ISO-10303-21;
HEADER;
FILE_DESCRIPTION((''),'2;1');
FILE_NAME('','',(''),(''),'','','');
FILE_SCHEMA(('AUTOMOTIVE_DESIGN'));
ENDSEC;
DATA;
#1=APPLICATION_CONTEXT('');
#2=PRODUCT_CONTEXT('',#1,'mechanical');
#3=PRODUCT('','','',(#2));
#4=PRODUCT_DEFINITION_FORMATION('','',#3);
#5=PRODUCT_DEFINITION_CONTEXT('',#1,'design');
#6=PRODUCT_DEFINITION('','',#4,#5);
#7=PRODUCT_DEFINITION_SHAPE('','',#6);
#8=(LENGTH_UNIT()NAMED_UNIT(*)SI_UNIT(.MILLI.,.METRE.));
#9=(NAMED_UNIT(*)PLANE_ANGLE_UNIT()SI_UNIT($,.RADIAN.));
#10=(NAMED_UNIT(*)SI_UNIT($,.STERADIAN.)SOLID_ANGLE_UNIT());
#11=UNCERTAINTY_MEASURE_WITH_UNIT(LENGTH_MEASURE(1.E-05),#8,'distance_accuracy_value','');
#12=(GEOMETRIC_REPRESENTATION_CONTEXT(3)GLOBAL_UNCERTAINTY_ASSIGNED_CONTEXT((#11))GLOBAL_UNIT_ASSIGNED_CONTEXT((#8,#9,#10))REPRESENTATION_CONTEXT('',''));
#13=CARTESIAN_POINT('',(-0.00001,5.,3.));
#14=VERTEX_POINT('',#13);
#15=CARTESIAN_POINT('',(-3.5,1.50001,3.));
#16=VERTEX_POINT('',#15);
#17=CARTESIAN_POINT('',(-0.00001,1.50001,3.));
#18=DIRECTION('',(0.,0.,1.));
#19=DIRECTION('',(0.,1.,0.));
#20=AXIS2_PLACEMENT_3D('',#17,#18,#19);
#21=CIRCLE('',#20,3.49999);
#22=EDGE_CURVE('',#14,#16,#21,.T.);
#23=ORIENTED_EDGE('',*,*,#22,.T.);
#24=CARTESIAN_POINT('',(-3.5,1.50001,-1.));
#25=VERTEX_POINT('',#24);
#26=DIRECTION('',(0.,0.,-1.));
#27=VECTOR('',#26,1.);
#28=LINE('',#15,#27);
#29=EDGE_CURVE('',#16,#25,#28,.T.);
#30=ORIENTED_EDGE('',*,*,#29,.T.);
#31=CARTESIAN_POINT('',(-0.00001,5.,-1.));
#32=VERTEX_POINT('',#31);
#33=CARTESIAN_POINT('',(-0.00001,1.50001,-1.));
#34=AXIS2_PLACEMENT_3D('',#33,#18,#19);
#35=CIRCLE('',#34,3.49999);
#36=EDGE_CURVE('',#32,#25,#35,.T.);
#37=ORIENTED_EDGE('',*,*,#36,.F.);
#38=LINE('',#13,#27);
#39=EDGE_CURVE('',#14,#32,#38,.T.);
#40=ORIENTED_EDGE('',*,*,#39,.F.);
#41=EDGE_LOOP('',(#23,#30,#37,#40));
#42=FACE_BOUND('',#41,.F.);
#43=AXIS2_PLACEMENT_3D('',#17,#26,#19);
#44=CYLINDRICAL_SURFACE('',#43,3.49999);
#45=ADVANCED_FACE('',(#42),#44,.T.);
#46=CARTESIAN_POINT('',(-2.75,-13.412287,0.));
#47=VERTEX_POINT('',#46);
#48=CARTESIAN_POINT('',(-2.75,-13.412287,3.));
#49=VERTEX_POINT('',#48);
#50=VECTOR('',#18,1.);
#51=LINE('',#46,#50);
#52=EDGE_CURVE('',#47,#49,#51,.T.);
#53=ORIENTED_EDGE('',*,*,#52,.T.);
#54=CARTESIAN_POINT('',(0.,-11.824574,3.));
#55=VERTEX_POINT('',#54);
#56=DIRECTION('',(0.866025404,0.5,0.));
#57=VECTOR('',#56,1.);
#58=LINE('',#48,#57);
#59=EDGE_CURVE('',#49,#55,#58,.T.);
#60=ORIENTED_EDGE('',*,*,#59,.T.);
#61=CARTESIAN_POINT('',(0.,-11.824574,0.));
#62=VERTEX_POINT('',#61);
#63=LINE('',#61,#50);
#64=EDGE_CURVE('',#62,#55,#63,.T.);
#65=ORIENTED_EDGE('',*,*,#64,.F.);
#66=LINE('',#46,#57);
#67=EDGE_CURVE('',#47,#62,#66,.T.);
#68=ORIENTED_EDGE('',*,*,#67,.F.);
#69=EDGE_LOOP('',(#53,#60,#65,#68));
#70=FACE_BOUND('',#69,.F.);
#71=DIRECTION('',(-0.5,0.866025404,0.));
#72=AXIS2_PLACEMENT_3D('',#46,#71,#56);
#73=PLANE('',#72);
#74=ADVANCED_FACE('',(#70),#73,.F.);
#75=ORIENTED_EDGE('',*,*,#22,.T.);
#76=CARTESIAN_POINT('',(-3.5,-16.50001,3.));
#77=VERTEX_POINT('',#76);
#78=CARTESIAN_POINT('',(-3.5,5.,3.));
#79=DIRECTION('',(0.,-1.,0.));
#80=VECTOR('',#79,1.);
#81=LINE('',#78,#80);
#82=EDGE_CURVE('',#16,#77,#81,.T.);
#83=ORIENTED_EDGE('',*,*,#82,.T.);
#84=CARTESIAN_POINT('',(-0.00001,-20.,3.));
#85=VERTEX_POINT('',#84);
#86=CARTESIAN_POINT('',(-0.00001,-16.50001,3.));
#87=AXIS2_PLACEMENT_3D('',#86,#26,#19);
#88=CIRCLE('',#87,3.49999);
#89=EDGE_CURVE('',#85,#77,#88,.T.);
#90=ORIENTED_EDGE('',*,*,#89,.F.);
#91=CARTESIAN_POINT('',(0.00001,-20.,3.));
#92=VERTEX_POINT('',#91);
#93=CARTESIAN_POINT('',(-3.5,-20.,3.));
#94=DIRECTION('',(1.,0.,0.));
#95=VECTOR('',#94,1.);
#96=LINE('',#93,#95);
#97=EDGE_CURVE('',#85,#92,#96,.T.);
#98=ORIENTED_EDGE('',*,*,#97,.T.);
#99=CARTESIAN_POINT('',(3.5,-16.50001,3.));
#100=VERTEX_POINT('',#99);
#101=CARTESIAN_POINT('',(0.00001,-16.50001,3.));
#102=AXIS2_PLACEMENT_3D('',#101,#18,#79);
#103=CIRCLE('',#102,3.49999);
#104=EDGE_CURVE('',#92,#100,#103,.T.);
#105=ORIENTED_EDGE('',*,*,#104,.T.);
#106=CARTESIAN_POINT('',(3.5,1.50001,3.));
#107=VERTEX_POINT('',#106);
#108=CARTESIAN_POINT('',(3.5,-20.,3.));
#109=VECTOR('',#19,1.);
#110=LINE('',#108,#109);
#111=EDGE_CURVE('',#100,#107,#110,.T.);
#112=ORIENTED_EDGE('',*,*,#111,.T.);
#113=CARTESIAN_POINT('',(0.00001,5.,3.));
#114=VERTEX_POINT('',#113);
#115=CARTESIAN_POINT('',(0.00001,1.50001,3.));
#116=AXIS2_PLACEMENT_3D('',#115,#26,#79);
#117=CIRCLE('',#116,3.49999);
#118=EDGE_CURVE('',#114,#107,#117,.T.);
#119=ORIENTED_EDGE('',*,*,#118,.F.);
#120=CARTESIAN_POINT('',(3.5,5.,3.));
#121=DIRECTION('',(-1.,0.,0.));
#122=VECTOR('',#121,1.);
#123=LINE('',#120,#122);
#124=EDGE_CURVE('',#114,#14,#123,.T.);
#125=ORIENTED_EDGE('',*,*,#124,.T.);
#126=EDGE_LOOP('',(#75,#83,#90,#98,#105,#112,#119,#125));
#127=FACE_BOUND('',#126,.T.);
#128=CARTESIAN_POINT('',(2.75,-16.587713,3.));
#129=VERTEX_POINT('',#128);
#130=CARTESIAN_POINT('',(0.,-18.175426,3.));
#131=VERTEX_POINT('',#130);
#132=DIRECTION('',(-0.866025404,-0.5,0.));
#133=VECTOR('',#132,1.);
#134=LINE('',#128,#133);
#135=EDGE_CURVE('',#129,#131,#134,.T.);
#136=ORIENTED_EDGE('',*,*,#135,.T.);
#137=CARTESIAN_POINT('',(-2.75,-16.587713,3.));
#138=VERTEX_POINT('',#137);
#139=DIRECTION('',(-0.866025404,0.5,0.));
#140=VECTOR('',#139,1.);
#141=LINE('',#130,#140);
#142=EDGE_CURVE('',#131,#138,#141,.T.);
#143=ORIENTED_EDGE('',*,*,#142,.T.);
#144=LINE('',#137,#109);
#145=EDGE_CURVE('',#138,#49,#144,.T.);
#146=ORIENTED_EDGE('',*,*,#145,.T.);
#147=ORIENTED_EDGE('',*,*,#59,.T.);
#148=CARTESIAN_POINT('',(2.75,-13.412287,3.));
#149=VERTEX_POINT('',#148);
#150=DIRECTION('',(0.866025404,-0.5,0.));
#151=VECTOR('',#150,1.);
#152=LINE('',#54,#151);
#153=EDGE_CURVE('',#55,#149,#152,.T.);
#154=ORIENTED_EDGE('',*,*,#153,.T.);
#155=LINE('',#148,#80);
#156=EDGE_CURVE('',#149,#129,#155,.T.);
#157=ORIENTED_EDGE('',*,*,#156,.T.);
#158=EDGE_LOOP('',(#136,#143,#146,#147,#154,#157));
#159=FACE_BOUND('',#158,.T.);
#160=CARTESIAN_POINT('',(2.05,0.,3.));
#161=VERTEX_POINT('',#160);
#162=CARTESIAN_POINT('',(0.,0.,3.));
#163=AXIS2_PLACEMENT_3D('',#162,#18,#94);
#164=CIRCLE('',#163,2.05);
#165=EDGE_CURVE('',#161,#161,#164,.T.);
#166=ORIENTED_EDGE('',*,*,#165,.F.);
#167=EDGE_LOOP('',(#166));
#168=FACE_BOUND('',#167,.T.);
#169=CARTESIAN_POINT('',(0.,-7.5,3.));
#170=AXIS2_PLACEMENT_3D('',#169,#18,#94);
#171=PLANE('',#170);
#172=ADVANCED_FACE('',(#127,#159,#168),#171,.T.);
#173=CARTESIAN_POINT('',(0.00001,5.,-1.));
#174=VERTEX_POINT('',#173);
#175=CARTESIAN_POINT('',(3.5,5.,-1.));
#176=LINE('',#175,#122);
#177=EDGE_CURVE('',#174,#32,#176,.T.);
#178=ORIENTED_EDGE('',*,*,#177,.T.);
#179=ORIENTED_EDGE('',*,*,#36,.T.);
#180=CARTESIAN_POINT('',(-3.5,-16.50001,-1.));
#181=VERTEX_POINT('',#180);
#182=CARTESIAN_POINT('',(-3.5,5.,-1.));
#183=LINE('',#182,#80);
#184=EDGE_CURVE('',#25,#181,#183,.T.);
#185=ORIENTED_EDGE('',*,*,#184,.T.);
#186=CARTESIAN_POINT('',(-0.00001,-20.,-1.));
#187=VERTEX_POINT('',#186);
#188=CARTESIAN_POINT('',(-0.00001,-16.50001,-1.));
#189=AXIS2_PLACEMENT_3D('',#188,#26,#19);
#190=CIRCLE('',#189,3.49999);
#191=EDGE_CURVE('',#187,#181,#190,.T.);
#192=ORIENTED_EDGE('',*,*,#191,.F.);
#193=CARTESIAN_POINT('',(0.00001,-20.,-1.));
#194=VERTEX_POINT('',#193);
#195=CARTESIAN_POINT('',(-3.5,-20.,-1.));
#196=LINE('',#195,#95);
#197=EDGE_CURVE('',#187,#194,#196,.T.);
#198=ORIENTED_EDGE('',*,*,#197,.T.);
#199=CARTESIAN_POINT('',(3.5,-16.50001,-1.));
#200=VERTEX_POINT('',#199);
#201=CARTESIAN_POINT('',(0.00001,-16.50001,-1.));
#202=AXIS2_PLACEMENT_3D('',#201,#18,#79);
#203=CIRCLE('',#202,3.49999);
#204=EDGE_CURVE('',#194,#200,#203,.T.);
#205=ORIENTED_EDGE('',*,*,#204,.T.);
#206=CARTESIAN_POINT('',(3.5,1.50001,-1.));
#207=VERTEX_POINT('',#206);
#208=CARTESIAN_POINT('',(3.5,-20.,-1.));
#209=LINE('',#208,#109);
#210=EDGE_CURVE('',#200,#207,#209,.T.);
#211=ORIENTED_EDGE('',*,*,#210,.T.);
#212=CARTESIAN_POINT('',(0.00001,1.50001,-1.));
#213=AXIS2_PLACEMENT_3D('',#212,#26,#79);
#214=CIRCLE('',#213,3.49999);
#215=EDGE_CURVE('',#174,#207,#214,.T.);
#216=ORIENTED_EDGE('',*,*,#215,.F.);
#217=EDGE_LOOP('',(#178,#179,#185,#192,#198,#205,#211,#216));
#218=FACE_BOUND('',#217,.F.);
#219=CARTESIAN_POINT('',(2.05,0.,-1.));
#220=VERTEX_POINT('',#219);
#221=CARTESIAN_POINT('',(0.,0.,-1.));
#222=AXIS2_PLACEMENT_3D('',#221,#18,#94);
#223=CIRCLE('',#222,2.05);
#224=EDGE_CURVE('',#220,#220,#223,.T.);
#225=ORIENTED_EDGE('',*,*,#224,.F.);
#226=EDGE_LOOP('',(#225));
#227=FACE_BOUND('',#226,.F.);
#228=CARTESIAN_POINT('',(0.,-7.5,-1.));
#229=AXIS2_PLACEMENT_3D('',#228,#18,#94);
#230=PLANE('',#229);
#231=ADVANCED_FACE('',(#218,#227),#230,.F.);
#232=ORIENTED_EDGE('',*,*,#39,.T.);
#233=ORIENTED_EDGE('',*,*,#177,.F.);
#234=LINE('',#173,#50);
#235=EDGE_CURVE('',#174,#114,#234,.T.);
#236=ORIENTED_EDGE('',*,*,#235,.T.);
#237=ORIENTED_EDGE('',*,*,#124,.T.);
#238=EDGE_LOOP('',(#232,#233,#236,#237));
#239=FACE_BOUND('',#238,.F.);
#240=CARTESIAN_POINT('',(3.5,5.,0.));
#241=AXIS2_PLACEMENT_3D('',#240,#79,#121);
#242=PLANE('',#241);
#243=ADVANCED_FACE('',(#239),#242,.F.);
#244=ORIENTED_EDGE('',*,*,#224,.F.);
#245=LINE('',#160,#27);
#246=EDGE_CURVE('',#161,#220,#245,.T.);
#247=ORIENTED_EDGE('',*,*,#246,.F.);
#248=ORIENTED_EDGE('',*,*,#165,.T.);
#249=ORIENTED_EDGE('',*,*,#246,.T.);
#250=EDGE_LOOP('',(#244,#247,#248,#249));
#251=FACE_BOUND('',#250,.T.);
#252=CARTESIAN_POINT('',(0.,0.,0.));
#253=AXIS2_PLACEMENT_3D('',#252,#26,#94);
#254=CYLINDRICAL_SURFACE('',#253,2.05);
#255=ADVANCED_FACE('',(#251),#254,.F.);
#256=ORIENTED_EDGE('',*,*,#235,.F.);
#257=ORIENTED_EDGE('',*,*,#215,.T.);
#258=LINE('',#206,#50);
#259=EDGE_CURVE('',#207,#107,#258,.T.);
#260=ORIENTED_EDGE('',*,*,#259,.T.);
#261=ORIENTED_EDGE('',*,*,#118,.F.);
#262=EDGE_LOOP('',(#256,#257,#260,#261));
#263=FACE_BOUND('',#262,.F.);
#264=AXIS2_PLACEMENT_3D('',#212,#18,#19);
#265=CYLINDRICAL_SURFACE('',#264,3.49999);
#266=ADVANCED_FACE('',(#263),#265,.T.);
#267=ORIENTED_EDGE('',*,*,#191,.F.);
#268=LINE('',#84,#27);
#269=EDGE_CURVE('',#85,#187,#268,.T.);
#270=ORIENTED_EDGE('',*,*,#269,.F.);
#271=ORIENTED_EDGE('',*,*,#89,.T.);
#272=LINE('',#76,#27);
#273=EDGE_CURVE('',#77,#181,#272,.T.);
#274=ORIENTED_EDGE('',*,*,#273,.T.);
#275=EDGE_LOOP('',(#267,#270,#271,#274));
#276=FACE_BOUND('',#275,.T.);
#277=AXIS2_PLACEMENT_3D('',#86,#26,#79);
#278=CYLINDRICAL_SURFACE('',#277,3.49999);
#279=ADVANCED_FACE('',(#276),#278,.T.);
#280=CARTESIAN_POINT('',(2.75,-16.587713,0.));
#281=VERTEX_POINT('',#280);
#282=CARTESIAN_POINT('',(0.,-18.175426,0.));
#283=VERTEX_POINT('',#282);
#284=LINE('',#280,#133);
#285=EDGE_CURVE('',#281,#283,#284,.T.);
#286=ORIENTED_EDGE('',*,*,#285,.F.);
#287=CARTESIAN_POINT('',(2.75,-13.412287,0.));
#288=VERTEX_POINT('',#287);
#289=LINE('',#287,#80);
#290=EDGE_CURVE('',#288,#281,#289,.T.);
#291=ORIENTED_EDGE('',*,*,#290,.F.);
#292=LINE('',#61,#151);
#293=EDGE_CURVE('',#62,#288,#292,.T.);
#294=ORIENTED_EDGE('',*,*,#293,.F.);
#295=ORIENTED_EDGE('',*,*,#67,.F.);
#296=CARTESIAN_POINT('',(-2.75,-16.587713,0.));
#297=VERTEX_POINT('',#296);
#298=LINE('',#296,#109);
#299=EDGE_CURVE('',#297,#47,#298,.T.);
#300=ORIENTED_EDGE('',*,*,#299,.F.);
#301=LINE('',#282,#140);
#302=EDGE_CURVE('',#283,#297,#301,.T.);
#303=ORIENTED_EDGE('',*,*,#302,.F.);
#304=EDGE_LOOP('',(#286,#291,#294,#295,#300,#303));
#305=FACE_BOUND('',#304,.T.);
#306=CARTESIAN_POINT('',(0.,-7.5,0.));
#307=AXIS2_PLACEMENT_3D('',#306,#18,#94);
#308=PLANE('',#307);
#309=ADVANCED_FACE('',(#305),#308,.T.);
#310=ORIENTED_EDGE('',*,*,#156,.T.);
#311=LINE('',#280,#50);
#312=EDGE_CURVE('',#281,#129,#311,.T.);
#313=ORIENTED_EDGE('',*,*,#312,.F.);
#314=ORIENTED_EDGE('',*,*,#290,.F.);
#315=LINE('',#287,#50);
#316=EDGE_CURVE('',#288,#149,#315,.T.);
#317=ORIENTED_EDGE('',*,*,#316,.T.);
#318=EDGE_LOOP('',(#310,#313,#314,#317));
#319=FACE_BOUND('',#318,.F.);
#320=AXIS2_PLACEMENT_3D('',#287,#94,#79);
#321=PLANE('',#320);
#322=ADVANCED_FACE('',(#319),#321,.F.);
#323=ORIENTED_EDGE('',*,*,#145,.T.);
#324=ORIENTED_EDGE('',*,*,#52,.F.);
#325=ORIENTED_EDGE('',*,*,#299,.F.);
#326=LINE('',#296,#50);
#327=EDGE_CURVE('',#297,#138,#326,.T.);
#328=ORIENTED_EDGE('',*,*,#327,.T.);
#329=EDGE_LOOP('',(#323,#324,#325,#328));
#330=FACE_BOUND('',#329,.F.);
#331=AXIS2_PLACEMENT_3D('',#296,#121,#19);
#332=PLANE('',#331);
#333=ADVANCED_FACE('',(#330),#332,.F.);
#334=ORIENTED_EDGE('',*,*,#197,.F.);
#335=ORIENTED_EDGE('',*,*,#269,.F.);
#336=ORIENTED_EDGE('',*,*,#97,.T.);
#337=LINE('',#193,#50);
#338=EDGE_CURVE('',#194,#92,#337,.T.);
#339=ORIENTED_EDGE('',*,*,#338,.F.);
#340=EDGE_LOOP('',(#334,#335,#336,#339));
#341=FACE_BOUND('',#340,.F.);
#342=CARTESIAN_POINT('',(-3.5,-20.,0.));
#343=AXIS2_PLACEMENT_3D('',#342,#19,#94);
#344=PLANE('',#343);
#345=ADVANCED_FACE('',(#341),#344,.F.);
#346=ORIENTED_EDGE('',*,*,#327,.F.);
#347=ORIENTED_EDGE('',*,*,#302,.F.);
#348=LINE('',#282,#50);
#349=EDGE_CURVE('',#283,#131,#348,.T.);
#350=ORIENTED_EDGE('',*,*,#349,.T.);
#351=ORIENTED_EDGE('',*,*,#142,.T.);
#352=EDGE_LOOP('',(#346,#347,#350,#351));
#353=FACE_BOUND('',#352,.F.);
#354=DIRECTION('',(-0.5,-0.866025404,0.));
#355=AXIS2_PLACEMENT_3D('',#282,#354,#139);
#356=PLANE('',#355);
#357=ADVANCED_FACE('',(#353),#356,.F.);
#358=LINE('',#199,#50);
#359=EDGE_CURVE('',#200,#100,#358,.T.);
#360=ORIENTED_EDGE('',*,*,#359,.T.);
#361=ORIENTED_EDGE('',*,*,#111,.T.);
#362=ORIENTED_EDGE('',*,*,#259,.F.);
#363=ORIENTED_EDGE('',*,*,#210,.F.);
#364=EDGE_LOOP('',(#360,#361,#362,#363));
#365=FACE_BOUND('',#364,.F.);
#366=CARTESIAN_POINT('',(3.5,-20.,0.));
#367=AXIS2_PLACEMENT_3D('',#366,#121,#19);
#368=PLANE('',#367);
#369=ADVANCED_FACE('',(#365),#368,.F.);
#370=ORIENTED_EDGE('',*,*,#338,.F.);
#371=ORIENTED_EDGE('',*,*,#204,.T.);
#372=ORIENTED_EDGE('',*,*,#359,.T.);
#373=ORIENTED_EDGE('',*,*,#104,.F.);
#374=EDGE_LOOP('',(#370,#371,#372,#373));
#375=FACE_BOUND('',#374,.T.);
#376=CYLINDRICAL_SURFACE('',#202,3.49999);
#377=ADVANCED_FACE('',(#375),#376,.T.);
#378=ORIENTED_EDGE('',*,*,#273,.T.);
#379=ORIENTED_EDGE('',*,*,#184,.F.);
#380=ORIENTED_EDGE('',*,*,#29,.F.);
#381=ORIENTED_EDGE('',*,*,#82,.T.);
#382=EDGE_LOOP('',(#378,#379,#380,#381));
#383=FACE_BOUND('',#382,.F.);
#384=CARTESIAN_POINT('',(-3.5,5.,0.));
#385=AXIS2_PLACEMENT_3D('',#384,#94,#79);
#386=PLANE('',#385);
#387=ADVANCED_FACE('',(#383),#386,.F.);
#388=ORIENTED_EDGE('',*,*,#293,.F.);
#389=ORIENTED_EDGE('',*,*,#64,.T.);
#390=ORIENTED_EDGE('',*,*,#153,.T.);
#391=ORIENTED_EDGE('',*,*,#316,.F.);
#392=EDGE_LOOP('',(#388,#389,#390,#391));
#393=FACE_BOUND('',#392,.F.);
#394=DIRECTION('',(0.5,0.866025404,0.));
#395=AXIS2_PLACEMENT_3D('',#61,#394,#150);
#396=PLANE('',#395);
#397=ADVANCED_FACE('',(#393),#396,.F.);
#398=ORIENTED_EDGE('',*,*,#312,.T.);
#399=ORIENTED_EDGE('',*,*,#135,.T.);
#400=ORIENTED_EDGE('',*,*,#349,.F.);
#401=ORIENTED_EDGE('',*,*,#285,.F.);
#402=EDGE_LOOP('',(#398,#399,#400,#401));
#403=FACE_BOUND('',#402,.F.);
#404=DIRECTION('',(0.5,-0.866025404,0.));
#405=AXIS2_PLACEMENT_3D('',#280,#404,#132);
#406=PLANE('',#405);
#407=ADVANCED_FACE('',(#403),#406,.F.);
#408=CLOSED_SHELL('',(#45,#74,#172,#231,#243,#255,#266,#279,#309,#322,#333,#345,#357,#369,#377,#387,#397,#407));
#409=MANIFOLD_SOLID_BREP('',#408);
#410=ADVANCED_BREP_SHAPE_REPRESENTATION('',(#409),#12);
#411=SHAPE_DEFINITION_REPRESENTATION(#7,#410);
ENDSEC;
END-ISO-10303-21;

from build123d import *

# Parameters (mm, degrees)
F0_R     = 2.05
F1_DEPTH = 1
F2_DEPTH = 3
F3_R     = 3.49999


# Not quite as in the source:
# - a fillet or chamfer is up to 0.001 mm smaller than in the source, because OpenCascade refuses the exact size


with BuildPart() as f1:
    # F0 (on Top) → F1 (new body)
    with BuildSketch(Plane.XY):
        Polygon((-3.5, -20), (3.5, -20), (3.5, 5), (0, 5), (-3.5, 5), align=None)
        Polygon((0, -18.1754264805), (-2.75, -16.5877132403), (-2.75, -13.4122867597), (0, -11.8245735195), (2.75, -13.4122867597), (2.75, -16.5877132403), align=None, mode=Mode.SUBTRACT)
        Circle(F0_R, mode=Mode.SUBTRACT)
        Polygon((-2.75, -13.4122867597), (-2.75, -16.5877132403), (0, -18.1754264805), (2.75, -16.5877132403), (2.75, -13.4122867597), (0, -11.8245735195), align=None)
    extrude(amount=-F1_DEPTH)

    # F0 (on Top) → F2 (join)
    with BuildSketch(Plane.XY):
        Polygon((-3.5, -20), (3.5, -20), (3.5, 5), (0, 5), (-3.5, 5), align=None)
        Polygon((0, -18.1754264805), (-2.75, -16.5877132403), (-2.75, -13.4122867597), (0, -11.8245735195), (2.75, -13.4122867597), (2.75, -16.5877132403), align=None, mode=Mode.SUBTRACT)
        Circle(F0_R, mode=Mode.SUBTRACT)
    extrude(amount=F2_DEPTH)

    # F3 (radius 3.5 in the source; OpenCascade refuses exactly that, so slightly less here)
    f3_edges = [f1.edges().sort_by_distance(p)[0] for p in [
        (3.5, -20, 1),
        (-3.5, -20, 1),
        (3.5, 5, 1),
        (-3.5, 5, 1),
    ]]
    fillet(f3_edges, radius=F3_R)


solid = f1.part
